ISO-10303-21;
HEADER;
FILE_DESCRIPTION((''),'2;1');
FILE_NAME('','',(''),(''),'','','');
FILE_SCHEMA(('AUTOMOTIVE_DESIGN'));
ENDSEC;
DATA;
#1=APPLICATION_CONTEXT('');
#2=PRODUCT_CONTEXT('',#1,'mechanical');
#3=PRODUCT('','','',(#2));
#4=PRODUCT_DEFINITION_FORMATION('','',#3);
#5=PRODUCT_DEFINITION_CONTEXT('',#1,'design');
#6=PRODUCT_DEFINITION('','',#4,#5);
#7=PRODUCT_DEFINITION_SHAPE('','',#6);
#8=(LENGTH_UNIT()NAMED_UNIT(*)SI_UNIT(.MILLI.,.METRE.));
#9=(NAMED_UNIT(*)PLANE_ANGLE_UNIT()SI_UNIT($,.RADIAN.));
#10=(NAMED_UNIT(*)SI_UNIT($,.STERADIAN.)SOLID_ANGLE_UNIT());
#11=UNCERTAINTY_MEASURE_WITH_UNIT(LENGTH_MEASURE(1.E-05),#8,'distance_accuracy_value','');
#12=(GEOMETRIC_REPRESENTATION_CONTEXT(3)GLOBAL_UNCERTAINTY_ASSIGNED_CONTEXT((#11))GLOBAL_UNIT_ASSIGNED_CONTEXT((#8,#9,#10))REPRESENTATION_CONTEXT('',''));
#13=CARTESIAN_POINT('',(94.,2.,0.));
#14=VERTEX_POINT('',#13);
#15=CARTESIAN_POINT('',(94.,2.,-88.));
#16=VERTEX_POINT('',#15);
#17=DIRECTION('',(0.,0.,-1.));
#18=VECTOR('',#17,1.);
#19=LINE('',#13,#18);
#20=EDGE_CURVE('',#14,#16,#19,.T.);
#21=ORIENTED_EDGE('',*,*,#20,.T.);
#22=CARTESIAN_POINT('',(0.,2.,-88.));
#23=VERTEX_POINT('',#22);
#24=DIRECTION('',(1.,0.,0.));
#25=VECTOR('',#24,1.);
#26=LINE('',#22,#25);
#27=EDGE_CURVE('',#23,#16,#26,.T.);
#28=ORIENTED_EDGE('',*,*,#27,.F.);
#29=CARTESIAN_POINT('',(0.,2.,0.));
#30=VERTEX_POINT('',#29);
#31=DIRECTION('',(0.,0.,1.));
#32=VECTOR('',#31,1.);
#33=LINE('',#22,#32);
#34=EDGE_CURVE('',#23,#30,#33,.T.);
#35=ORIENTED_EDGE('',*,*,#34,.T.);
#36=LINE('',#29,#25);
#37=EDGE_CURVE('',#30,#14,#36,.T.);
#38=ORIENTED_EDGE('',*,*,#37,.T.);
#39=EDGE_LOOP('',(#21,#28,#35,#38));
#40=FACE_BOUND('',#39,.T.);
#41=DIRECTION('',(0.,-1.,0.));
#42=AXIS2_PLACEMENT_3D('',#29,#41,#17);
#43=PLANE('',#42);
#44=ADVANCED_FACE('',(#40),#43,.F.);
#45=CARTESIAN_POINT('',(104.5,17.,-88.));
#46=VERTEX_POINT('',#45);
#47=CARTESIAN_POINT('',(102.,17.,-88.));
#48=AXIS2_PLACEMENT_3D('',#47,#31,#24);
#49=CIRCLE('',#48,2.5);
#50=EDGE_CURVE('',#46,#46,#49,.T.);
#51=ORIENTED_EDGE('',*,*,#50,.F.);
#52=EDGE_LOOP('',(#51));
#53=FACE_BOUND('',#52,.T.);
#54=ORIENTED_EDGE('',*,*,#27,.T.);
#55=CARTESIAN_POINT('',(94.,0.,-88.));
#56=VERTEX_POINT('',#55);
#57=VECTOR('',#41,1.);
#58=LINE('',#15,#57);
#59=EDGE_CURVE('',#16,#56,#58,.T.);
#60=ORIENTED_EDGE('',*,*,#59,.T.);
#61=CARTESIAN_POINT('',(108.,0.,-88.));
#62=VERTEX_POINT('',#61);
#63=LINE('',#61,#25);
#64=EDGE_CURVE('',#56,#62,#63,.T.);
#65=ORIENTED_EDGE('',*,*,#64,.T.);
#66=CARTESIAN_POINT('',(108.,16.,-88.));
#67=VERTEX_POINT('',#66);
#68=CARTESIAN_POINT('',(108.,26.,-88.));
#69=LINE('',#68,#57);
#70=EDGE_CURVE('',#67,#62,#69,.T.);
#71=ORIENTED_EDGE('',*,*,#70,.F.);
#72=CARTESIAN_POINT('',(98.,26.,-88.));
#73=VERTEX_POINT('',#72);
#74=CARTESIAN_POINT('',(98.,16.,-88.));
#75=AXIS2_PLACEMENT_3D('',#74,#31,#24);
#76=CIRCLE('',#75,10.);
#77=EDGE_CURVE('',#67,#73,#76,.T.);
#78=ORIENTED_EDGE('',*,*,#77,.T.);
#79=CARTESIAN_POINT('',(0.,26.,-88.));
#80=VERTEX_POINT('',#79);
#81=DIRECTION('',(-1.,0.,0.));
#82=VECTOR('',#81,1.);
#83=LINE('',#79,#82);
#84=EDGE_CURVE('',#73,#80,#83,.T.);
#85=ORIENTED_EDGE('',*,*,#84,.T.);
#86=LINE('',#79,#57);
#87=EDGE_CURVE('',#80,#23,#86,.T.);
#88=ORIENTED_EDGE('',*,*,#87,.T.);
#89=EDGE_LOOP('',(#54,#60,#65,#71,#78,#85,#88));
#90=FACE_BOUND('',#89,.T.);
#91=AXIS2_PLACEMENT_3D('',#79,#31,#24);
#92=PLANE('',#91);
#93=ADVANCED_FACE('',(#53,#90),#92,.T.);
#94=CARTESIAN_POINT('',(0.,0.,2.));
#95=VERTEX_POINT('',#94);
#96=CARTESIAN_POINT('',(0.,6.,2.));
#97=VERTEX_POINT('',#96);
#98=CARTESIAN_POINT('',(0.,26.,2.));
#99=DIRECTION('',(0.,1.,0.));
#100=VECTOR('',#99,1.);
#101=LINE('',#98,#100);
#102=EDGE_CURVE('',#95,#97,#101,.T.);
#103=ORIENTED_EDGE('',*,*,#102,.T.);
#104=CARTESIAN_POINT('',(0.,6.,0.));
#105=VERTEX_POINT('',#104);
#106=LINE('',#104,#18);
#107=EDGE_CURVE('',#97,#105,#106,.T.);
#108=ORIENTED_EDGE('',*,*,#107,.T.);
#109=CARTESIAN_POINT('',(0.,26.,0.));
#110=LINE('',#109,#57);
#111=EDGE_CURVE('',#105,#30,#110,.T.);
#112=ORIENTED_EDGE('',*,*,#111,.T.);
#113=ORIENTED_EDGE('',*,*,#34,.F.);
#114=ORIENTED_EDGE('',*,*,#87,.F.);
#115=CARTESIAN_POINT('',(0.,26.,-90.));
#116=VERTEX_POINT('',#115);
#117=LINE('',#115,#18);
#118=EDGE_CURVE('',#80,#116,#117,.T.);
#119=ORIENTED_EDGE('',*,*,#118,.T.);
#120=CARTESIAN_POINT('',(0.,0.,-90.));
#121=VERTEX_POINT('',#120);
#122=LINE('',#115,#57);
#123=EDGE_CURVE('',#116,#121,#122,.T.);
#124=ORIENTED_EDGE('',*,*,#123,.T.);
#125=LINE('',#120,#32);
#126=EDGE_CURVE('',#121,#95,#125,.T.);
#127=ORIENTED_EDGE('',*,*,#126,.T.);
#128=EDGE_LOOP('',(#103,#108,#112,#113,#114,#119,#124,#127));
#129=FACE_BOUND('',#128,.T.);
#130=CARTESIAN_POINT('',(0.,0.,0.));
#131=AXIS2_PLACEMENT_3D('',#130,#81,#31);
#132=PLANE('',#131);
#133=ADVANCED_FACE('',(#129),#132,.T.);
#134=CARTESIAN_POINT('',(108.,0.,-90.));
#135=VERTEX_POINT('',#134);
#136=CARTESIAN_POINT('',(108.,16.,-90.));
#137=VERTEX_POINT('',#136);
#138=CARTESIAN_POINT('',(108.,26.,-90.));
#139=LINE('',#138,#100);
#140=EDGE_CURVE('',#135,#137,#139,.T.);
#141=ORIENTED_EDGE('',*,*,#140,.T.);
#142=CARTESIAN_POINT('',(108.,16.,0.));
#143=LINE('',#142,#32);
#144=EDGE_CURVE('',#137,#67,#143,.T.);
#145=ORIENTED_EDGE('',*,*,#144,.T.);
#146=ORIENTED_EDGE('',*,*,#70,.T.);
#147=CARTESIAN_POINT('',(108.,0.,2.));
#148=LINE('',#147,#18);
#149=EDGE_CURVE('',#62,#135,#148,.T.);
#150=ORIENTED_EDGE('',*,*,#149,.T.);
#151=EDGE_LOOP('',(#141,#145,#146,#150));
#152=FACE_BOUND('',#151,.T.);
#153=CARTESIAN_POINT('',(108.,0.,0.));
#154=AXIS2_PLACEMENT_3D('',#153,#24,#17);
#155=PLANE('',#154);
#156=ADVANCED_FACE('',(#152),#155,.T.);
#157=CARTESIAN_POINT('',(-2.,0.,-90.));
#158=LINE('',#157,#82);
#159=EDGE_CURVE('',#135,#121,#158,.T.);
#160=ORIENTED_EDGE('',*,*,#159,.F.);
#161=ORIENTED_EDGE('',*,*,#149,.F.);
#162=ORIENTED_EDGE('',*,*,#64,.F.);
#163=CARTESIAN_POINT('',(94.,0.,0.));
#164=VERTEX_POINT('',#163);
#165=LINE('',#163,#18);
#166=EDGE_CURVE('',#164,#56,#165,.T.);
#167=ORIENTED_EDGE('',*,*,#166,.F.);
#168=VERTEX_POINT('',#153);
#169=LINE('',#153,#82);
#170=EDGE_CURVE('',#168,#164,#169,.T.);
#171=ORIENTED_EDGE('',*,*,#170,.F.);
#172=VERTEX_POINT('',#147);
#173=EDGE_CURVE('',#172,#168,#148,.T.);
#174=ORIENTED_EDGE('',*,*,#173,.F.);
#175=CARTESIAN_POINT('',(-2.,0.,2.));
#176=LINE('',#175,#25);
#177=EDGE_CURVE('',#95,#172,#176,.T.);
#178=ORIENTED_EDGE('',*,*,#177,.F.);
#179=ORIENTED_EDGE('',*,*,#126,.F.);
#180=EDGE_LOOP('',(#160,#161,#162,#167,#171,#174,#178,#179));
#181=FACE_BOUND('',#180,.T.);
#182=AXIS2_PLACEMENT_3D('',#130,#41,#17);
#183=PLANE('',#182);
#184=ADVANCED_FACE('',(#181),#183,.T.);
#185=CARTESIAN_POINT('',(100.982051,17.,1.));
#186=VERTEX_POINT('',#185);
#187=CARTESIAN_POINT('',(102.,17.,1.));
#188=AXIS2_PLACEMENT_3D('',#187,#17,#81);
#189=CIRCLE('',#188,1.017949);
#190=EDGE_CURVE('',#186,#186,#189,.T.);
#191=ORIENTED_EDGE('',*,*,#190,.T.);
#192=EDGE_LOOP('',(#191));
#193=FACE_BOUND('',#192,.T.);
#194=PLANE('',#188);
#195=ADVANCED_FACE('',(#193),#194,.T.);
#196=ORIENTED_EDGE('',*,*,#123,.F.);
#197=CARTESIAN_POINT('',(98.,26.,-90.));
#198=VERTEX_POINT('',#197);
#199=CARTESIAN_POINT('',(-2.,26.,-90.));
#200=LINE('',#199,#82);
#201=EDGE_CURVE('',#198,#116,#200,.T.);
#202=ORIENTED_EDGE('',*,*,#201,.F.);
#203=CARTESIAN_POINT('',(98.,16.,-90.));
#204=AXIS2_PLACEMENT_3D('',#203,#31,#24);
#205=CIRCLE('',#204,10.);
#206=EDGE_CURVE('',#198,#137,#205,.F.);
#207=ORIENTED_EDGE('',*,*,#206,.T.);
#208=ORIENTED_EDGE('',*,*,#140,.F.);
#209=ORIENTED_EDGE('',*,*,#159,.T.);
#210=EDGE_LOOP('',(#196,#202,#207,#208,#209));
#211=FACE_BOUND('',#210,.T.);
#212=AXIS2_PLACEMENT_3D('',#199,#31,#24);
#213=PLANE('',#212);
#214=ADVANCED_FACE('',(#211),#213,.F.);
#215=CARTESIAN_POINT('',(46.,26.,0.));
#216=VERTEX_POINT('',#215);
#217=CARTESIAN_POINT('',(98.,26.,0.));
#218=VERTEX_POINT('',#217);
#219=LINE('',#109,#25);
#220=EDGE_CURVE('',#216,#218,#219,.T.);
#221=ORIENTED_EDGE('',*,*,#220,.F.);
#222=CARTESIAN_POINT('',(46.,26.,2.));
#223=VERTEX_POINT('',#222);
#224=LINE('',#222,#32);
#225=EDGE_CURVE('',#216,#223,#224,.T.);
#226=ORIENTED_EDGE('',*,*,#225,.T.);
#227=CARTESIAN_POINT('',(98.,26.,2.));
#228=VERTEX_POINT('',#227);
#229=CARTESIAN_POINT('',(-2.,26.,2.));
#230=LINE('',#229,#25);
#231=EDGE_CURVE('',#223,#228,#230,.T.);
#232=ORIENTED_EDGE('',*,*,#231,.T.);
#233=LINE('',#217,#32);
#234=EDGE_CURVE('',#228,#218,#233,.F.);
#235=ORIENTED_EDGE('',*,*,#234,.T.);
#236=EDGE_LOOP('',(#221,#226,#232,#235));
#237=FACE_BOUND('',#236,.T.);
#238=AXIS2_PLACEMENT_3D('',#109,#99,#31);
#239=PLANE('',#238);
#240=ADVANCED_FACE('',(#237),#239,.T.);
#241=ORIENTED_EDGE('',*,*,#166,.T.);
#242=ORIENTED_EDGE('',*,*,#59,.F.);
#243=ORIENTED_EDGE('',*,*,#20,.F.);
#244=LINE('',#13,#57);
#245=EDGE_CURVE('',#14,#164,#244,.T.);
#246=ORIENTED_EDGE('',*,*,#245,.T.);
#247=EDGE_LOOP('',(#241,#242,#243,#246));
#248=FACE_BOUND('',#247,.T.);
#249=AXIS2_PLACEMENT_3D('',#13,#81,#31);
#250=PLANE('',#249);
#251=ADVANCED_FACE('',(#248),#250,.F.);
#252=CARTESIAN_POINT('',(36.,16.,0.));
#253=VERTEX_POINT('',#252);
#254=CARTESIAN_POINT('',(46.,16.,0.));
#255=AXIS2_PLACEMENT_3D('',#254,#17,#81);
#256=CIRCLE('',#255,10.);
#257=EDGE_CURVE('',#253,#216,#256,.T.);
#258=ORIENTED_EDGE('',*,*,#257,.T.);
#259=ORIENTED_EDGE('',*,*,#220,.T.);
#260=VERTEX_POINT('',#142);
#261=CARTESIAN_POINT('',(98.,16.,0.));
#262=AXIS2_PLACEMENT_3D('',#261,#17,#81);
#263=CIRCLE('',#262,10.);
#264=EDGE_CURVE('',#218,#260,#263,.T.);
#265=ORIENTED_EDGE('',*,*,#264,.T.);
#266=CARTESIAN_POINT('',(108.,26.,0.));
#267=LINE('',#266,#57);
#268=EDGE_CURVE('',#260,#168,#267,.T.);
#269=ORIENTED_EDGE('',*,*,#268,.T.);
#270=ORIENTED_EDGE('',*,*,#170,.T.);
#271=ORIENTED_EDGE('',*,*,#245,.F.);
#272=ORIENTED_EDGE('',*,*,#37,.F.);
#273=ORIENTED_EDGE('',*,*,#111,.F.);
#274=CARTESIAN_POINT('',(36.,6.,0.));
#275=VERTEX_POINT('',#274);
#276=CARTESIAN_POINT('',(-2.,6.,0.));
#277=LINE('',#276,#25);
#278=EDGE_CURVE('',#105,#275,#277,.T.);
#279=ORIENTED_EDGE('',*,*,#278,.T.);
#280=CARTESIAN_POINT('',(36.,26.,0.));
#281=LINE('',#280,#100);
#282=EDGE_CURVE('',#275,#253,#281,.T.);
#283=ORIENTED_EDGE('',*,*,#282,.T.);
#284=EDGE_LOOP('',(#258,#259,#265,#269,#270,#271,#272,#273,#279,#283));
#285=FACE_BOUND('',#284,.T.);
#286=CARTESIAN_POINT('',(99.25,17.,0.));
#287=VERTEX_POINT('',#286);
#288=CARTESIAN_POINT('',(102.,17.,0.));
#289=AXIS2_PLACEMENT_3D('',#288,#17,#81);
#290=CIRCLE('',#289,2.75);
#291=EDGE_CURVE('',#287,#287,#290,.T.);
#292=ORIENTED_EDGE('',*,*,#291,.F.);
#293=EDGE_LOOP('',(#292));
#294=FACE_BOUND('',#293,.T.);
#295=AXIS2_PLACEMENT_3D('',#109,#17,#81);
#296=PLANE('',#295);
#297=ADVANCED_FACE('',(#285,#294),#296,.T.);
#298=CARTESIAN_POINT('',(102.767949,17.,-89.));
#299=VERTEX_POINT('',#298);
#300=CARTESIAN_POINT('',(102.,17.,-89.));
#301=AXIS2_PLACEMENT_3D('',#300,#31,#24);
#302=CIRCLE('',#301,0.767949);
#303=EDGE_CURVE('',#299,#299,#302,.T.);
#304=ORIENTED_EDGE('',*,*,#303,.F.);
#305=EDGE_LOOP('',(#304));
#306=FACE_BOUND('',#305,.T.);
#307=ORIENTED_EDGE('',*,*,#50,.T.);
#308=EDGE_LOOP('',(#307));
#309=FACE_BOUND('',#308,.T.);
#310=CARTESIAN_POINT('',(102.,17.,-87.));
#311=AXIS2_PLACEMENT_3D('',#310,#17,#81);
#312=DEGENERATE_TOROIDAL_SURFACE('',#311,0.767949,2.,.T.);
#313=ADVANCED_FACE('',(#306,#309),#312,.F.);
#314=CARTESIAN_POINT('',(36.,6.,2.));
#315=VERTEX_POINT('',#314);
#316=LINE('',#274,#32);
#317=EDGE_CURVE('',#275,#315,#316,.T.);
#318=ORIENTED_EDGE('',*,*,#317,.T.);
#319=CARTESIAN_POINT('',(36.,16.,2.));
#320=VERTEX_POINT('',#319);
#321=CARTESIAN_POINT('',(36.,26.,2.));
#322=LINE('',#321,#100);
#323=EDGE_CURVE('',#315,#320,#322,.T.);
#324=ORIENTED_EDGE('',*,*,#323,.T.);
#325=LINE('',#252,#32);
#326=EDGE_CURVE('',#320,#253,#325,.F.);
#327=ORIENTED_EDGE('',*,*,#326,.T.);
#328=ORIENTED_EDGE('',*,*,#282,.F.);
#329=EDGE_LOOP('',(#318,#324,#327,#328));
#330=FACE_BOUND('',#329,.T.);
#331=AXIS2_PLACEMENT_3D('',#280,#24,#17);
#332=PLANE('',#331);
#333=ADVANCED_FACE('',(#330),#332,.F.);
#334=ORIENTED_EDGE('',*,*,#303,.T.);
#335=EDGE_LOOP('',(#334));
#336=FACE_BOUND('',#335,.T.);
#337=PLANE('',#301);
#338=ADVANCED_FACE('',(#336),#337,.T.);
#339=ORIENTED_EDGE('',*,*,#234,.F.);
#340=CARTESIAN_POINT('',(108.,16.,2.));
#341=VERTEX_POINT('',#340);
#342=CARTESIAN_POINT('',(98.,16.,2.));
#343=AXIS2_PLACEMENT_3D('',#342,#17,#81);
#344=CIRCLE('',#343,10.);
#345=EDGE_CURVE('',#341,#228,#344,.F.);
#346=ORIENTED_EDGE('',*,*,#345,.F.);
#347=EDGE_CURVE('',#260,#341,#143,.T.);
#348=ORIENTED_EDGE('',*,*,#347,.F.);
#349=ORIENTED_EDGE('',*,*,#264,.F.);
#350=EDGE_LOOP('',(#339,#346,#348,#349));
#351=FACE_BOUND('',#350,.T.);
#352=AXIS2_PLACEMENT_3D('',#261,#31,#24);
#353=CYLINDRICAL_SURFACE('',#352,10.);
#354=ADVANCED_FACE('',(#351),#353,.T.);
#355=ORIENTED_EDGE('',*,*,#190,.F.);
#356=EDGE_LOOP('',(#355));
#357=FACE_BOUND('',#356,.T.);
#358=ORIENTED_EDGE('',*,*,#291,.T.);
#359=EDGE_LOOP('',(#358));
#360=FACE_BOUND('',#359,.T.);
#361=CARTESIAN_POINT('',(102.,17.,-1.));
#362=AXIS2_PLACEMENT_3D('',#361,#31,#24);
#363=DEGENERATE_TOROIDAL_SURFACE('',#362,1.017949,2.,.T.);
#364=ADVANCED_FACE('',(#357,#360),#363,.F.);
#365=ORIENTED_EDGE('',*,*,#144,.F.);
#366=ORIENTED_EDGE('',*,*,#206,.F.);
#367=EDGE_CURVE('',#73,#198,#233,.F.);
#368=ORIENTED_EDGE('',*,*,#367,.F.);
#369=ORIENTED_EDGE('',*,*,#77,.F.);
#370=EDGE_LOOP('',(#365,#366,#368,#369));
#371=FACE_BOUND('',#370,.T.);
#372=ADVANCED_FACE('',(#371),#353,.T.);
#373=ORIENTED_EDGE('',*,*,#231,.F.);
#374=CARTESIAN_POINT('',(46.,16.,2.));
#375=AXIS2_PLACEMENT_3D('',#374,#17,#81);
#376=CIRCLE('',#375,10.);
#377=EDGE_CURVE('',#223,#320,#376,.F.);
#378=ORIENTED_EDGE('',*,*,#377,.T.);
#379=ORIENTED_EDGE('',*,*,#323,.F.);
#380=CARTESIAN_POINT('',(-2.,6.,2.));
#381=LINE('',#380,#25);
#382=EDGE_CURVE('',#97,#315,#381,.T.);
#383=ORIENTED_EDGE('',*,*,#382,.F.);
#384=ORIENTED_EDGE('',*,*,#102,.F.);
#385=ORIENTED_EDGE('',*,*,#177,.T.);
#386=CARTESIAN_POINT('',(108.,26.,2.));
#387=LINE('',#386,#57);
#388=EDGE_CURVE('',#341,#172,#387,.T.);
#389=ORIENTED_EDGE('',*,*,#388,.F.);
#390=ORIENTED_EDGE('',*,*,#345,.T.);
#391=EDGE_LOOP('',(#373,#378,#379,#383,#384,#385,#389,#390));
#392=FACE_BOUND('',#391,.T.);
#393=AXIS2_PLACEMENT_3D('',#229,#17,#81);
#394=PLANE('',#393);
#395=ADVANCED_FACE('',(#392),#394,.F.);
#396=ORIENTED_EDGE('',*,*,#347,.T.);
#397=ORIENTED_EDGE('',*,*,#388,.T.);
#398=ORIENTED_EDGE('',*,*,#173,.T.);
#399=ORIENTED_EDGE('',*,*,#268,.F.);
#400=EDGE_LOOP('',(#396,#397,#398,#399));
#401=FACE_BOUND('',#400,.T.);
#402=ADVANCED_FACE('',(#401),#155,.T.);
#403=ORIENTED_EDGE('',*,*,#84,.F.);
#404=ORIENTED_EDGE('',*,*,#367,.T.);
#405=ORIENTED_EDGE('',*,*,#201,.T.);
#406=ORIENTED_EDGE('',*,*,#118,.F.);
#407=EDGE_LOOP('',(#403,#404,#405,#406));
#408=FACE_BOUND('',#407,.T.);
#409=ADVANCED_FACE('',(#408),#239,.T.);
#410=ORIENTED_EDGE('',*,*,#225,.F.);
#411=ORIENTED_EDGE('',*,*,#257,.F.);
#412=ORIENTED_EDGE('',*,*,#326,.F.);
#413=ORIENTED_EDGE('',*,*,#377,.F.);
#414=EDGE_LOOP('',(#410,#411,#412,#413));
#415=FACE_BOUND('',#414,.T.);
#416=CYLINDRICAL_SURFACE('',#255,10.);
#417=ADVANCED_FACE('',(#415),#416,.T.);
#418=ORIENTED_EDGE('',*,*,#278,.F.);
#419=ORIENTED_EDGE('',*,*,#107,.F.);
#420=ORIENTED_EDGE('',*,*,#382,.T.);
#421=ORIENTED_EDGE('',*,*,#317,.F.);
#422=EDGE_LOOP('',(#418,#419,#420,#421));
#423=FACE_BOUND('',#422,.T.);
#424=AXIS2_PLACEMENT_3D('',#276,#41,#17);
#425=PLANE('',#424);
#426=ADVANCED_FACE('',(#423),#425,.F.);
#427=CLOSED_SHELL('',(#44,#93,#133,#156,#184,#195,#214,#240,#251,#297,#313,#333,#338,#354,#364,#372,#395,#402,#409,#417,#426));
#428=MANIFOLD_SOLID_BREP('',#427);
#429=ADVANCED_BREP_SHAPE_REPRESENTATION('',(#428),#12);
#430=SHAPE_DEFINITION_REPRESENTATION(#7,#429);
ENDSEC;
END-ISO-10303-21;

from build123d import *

# Parameters (mm, degrees)
SKETCH1_W           = 108
SKETCH1_H           = 88
BOSS_EXTRUDE2_DEPTH = 2
SKETCH1_3_W         = 112
SKETCH1_3_H         = 92
SKETCH1_3_W_2       = 108
SKETCH1_3_H_2       = 88
BOSS_EXTRUDE3_DEPTH = 26
SKETCH5_W           = 92
SKETCH5_H           = 26
CUT_EXTRUDE1_DEPTH  = 2
SKETCH6_R           = 2.75
CUT_EXTRUDE2_DEPTH  = 1
SKETCH7_R           = 2.5
CUT_EXTRUDE3_DEPTH  = 1
FILLET1_R           = 2
FILLET2_R           = 2
SKETCH9_W           = 38
SKETCH9_H           = 20
CUT_EXTRUDE4_DEPTH  = 2
SKETCH10_W          = 92
SKETCH10_H          = 26
CUT_EXTRUDE5_DEPTH  = 2
FILLET3_R           = 10
FILLET4_R           = 10
FILLET5_R           = 10
SKETCH11_W          = 14
SKETCH11_H          = 88
CUT_EXTRUDE6_DEPTH  = 2


with BuildPart() as part:
    # Sketch1 → Boss-Extrude2 (new body)
    with BuildSketch(Plane(origin=(0, 0, 0), x_dir=(1, 0, 0), z_dir=(0, 1, 0))):
        with Locations((54, 44)):
            Rectangle(SKETCH1_W, SKETCH1_H)
    extrude(amount=BOSS_EXTRUDE2_DEPTH)

    # Sketch1<3> → Boss-Extrude3 (add)
    with BuildSketch(Plane(origin=(0, 0, 0), x_dir=(1, 0, 0), z_dir=(0, 1, 0))):
        with Locations((54, 44)):
            Rectangle(SKETCH1_3_W, SKETCH1_3_H)
        with Locations((54, 44)):
            Rectangle(SKETCH1_3_W_2, SKETCH1_3_H_2, mode=Mode.SUBTRACT)
    extrude(amount=BOSS_EXTRUDE3_DEPTH)

    # Sketch5 → Cut-Extrude1 (cut)
    with BuildSketch(Plane(origin=(110, 0, 0), x_dir=(0, 0, -1), z_dir=(1, 0, 0))):
        with Locations((44, 13)):
            Rectangle(SKETCH5_W, SKETCH5_H)
    extrude(amount=-CUT_EXTRUDE1_DEPTH, mode=Mode.SUBTRACT)

    # Sketch6 → Cut-Extrude2 (cut)
    with BuildSketch(Plane(origin=(0, 0, 0), x_dir=(-1, 0, 0), z_dir=(0, 0, -1))):
        with Locations((-102, 17)):
            Circle(SKETCH6_R)
    extrude(amount=-CUT_EXTRUDE2_DEPTH, mode=Mode.SUBTRACT)

    # Sketch7 → Cut-Extrude3 (cut)
    with BuildSketch(Plane.XY.offset(-88)):
        with Locations((102, 17)):
            Circle(SKETCH7_R)
    extrude(amount=-CUT_EXTRUDE3_DEPTH, mode=Mode.SUBTRACT)

    # Fillet1
    # the kernel refuses this fillet: 2 mm, written as the material it adds along each edge
    with BuildSketch(Plane(origin=(102, 17, 1), x_dir=(-1, 0, 0), z_dir=(0, -1, 0))) as fillet1_piece_1:
        with BuildLine():
            CenterArc((1.017949192, 2), FILLET1_R, 270, 60)
            Line((1.017949192, 0), (1.017949192, -0.04))
            Line((1.017949192, -0.04), (2.75, -0.04))
            Line((2.75, -0.04), (2.79, 0))
            ThreePointArc((2.79, 0), (2.79, 0.5), (2.784641016, 0.98))
            Line((2.784641016, 0.98), (2.75, 1))
        make_face()
    revolve(axis=Axis((102, 17, 1), (0, 0, -1)))

    # Fillet2
    # the kernel refuses this fillet: 2 mm, written as the material it adds along each edge
    with BuildSketch(Plane(origin=(102, 17, -89), x_dir=(1, 0, 0), z_dir=(0, -1, 0))) as fillet2_piece_1:
        with BuildLine():
            CenterArc((0.767949192, 2), FILLET2_R, 270, 60)
            Line((0.767949192, 0), (0.767949192, -0.04))
            Line((0.767949192, -0.04), (2.5, -0.04))
            Line((2.5, -0.04), (2.54, 0))
            ThreePointArc((2.54, 0), (2.54, 0.5), (2.534641016, 0.98))
            Line((2.534641016, 0.98), (2.5, 1))
        make_face()
    revolve(axis=Axis((102, 17, -89), (0, 0, 1)))

    # Sketch9 → Cut-Extrude4 (cut)
    with BuildSketch(Plane.XY.offset(2)):
        with Locations((17, 16)):
            Rectangle(SKETCH9_W, SKETCH9_H)
    extrude(amount=-CUT_EXTRUDE4_DEPTH, mode=Mode.SUBTRACT)

    # Sketch10 → Cut-Extrude5 (cut)
    with BuildSketch(Plane.ZY.offset(2)):
        with Locations((-44, 13)):
            Rectangle(SKETCH10_W, SKETCH10_H)
    extrude(amount=-CUT_EXTRUDE5_DEPTH, mode=Mode.SUBTRACT)

    # Fillet3
    fillet3_edges = [part.edges().sort_by_distance(p)[0] for p in [
        (36, 26, 1),
    ]]
    fillet(fillet3_edges, radius=FILLET3_R)

    # Fillet4
    fillet4_edges = [part.edges().sort_by_distance(p)[0] for p in [
        (108, 26, 1),
    ]]
    fillet(fillet4_edges, radius=FILLET4_R)

    # Fillet5
    fillet5_edges = [part.edges().sort_by_distance(p)[0] for p in [
        (108, 26, -89),
    ]]
    fillet(fillet5_edges, radius=FILLET5_R)

    # Sketch11 → Cut-Extrude6 (cut)
    with BuildSketch(Plane(origin=(0, 0, 0), x_dir=(-1, 0, 0), z_dir=(0, -1, 0))):
        with Locations((-101, 44)):
            Rectangle(SKETCH11_W, SKETCH11_H)
    extrude(amount=-CUT_EXTRUDE6_DEPTH, mode=Mode.SUBTRACT)


solid = part.part
